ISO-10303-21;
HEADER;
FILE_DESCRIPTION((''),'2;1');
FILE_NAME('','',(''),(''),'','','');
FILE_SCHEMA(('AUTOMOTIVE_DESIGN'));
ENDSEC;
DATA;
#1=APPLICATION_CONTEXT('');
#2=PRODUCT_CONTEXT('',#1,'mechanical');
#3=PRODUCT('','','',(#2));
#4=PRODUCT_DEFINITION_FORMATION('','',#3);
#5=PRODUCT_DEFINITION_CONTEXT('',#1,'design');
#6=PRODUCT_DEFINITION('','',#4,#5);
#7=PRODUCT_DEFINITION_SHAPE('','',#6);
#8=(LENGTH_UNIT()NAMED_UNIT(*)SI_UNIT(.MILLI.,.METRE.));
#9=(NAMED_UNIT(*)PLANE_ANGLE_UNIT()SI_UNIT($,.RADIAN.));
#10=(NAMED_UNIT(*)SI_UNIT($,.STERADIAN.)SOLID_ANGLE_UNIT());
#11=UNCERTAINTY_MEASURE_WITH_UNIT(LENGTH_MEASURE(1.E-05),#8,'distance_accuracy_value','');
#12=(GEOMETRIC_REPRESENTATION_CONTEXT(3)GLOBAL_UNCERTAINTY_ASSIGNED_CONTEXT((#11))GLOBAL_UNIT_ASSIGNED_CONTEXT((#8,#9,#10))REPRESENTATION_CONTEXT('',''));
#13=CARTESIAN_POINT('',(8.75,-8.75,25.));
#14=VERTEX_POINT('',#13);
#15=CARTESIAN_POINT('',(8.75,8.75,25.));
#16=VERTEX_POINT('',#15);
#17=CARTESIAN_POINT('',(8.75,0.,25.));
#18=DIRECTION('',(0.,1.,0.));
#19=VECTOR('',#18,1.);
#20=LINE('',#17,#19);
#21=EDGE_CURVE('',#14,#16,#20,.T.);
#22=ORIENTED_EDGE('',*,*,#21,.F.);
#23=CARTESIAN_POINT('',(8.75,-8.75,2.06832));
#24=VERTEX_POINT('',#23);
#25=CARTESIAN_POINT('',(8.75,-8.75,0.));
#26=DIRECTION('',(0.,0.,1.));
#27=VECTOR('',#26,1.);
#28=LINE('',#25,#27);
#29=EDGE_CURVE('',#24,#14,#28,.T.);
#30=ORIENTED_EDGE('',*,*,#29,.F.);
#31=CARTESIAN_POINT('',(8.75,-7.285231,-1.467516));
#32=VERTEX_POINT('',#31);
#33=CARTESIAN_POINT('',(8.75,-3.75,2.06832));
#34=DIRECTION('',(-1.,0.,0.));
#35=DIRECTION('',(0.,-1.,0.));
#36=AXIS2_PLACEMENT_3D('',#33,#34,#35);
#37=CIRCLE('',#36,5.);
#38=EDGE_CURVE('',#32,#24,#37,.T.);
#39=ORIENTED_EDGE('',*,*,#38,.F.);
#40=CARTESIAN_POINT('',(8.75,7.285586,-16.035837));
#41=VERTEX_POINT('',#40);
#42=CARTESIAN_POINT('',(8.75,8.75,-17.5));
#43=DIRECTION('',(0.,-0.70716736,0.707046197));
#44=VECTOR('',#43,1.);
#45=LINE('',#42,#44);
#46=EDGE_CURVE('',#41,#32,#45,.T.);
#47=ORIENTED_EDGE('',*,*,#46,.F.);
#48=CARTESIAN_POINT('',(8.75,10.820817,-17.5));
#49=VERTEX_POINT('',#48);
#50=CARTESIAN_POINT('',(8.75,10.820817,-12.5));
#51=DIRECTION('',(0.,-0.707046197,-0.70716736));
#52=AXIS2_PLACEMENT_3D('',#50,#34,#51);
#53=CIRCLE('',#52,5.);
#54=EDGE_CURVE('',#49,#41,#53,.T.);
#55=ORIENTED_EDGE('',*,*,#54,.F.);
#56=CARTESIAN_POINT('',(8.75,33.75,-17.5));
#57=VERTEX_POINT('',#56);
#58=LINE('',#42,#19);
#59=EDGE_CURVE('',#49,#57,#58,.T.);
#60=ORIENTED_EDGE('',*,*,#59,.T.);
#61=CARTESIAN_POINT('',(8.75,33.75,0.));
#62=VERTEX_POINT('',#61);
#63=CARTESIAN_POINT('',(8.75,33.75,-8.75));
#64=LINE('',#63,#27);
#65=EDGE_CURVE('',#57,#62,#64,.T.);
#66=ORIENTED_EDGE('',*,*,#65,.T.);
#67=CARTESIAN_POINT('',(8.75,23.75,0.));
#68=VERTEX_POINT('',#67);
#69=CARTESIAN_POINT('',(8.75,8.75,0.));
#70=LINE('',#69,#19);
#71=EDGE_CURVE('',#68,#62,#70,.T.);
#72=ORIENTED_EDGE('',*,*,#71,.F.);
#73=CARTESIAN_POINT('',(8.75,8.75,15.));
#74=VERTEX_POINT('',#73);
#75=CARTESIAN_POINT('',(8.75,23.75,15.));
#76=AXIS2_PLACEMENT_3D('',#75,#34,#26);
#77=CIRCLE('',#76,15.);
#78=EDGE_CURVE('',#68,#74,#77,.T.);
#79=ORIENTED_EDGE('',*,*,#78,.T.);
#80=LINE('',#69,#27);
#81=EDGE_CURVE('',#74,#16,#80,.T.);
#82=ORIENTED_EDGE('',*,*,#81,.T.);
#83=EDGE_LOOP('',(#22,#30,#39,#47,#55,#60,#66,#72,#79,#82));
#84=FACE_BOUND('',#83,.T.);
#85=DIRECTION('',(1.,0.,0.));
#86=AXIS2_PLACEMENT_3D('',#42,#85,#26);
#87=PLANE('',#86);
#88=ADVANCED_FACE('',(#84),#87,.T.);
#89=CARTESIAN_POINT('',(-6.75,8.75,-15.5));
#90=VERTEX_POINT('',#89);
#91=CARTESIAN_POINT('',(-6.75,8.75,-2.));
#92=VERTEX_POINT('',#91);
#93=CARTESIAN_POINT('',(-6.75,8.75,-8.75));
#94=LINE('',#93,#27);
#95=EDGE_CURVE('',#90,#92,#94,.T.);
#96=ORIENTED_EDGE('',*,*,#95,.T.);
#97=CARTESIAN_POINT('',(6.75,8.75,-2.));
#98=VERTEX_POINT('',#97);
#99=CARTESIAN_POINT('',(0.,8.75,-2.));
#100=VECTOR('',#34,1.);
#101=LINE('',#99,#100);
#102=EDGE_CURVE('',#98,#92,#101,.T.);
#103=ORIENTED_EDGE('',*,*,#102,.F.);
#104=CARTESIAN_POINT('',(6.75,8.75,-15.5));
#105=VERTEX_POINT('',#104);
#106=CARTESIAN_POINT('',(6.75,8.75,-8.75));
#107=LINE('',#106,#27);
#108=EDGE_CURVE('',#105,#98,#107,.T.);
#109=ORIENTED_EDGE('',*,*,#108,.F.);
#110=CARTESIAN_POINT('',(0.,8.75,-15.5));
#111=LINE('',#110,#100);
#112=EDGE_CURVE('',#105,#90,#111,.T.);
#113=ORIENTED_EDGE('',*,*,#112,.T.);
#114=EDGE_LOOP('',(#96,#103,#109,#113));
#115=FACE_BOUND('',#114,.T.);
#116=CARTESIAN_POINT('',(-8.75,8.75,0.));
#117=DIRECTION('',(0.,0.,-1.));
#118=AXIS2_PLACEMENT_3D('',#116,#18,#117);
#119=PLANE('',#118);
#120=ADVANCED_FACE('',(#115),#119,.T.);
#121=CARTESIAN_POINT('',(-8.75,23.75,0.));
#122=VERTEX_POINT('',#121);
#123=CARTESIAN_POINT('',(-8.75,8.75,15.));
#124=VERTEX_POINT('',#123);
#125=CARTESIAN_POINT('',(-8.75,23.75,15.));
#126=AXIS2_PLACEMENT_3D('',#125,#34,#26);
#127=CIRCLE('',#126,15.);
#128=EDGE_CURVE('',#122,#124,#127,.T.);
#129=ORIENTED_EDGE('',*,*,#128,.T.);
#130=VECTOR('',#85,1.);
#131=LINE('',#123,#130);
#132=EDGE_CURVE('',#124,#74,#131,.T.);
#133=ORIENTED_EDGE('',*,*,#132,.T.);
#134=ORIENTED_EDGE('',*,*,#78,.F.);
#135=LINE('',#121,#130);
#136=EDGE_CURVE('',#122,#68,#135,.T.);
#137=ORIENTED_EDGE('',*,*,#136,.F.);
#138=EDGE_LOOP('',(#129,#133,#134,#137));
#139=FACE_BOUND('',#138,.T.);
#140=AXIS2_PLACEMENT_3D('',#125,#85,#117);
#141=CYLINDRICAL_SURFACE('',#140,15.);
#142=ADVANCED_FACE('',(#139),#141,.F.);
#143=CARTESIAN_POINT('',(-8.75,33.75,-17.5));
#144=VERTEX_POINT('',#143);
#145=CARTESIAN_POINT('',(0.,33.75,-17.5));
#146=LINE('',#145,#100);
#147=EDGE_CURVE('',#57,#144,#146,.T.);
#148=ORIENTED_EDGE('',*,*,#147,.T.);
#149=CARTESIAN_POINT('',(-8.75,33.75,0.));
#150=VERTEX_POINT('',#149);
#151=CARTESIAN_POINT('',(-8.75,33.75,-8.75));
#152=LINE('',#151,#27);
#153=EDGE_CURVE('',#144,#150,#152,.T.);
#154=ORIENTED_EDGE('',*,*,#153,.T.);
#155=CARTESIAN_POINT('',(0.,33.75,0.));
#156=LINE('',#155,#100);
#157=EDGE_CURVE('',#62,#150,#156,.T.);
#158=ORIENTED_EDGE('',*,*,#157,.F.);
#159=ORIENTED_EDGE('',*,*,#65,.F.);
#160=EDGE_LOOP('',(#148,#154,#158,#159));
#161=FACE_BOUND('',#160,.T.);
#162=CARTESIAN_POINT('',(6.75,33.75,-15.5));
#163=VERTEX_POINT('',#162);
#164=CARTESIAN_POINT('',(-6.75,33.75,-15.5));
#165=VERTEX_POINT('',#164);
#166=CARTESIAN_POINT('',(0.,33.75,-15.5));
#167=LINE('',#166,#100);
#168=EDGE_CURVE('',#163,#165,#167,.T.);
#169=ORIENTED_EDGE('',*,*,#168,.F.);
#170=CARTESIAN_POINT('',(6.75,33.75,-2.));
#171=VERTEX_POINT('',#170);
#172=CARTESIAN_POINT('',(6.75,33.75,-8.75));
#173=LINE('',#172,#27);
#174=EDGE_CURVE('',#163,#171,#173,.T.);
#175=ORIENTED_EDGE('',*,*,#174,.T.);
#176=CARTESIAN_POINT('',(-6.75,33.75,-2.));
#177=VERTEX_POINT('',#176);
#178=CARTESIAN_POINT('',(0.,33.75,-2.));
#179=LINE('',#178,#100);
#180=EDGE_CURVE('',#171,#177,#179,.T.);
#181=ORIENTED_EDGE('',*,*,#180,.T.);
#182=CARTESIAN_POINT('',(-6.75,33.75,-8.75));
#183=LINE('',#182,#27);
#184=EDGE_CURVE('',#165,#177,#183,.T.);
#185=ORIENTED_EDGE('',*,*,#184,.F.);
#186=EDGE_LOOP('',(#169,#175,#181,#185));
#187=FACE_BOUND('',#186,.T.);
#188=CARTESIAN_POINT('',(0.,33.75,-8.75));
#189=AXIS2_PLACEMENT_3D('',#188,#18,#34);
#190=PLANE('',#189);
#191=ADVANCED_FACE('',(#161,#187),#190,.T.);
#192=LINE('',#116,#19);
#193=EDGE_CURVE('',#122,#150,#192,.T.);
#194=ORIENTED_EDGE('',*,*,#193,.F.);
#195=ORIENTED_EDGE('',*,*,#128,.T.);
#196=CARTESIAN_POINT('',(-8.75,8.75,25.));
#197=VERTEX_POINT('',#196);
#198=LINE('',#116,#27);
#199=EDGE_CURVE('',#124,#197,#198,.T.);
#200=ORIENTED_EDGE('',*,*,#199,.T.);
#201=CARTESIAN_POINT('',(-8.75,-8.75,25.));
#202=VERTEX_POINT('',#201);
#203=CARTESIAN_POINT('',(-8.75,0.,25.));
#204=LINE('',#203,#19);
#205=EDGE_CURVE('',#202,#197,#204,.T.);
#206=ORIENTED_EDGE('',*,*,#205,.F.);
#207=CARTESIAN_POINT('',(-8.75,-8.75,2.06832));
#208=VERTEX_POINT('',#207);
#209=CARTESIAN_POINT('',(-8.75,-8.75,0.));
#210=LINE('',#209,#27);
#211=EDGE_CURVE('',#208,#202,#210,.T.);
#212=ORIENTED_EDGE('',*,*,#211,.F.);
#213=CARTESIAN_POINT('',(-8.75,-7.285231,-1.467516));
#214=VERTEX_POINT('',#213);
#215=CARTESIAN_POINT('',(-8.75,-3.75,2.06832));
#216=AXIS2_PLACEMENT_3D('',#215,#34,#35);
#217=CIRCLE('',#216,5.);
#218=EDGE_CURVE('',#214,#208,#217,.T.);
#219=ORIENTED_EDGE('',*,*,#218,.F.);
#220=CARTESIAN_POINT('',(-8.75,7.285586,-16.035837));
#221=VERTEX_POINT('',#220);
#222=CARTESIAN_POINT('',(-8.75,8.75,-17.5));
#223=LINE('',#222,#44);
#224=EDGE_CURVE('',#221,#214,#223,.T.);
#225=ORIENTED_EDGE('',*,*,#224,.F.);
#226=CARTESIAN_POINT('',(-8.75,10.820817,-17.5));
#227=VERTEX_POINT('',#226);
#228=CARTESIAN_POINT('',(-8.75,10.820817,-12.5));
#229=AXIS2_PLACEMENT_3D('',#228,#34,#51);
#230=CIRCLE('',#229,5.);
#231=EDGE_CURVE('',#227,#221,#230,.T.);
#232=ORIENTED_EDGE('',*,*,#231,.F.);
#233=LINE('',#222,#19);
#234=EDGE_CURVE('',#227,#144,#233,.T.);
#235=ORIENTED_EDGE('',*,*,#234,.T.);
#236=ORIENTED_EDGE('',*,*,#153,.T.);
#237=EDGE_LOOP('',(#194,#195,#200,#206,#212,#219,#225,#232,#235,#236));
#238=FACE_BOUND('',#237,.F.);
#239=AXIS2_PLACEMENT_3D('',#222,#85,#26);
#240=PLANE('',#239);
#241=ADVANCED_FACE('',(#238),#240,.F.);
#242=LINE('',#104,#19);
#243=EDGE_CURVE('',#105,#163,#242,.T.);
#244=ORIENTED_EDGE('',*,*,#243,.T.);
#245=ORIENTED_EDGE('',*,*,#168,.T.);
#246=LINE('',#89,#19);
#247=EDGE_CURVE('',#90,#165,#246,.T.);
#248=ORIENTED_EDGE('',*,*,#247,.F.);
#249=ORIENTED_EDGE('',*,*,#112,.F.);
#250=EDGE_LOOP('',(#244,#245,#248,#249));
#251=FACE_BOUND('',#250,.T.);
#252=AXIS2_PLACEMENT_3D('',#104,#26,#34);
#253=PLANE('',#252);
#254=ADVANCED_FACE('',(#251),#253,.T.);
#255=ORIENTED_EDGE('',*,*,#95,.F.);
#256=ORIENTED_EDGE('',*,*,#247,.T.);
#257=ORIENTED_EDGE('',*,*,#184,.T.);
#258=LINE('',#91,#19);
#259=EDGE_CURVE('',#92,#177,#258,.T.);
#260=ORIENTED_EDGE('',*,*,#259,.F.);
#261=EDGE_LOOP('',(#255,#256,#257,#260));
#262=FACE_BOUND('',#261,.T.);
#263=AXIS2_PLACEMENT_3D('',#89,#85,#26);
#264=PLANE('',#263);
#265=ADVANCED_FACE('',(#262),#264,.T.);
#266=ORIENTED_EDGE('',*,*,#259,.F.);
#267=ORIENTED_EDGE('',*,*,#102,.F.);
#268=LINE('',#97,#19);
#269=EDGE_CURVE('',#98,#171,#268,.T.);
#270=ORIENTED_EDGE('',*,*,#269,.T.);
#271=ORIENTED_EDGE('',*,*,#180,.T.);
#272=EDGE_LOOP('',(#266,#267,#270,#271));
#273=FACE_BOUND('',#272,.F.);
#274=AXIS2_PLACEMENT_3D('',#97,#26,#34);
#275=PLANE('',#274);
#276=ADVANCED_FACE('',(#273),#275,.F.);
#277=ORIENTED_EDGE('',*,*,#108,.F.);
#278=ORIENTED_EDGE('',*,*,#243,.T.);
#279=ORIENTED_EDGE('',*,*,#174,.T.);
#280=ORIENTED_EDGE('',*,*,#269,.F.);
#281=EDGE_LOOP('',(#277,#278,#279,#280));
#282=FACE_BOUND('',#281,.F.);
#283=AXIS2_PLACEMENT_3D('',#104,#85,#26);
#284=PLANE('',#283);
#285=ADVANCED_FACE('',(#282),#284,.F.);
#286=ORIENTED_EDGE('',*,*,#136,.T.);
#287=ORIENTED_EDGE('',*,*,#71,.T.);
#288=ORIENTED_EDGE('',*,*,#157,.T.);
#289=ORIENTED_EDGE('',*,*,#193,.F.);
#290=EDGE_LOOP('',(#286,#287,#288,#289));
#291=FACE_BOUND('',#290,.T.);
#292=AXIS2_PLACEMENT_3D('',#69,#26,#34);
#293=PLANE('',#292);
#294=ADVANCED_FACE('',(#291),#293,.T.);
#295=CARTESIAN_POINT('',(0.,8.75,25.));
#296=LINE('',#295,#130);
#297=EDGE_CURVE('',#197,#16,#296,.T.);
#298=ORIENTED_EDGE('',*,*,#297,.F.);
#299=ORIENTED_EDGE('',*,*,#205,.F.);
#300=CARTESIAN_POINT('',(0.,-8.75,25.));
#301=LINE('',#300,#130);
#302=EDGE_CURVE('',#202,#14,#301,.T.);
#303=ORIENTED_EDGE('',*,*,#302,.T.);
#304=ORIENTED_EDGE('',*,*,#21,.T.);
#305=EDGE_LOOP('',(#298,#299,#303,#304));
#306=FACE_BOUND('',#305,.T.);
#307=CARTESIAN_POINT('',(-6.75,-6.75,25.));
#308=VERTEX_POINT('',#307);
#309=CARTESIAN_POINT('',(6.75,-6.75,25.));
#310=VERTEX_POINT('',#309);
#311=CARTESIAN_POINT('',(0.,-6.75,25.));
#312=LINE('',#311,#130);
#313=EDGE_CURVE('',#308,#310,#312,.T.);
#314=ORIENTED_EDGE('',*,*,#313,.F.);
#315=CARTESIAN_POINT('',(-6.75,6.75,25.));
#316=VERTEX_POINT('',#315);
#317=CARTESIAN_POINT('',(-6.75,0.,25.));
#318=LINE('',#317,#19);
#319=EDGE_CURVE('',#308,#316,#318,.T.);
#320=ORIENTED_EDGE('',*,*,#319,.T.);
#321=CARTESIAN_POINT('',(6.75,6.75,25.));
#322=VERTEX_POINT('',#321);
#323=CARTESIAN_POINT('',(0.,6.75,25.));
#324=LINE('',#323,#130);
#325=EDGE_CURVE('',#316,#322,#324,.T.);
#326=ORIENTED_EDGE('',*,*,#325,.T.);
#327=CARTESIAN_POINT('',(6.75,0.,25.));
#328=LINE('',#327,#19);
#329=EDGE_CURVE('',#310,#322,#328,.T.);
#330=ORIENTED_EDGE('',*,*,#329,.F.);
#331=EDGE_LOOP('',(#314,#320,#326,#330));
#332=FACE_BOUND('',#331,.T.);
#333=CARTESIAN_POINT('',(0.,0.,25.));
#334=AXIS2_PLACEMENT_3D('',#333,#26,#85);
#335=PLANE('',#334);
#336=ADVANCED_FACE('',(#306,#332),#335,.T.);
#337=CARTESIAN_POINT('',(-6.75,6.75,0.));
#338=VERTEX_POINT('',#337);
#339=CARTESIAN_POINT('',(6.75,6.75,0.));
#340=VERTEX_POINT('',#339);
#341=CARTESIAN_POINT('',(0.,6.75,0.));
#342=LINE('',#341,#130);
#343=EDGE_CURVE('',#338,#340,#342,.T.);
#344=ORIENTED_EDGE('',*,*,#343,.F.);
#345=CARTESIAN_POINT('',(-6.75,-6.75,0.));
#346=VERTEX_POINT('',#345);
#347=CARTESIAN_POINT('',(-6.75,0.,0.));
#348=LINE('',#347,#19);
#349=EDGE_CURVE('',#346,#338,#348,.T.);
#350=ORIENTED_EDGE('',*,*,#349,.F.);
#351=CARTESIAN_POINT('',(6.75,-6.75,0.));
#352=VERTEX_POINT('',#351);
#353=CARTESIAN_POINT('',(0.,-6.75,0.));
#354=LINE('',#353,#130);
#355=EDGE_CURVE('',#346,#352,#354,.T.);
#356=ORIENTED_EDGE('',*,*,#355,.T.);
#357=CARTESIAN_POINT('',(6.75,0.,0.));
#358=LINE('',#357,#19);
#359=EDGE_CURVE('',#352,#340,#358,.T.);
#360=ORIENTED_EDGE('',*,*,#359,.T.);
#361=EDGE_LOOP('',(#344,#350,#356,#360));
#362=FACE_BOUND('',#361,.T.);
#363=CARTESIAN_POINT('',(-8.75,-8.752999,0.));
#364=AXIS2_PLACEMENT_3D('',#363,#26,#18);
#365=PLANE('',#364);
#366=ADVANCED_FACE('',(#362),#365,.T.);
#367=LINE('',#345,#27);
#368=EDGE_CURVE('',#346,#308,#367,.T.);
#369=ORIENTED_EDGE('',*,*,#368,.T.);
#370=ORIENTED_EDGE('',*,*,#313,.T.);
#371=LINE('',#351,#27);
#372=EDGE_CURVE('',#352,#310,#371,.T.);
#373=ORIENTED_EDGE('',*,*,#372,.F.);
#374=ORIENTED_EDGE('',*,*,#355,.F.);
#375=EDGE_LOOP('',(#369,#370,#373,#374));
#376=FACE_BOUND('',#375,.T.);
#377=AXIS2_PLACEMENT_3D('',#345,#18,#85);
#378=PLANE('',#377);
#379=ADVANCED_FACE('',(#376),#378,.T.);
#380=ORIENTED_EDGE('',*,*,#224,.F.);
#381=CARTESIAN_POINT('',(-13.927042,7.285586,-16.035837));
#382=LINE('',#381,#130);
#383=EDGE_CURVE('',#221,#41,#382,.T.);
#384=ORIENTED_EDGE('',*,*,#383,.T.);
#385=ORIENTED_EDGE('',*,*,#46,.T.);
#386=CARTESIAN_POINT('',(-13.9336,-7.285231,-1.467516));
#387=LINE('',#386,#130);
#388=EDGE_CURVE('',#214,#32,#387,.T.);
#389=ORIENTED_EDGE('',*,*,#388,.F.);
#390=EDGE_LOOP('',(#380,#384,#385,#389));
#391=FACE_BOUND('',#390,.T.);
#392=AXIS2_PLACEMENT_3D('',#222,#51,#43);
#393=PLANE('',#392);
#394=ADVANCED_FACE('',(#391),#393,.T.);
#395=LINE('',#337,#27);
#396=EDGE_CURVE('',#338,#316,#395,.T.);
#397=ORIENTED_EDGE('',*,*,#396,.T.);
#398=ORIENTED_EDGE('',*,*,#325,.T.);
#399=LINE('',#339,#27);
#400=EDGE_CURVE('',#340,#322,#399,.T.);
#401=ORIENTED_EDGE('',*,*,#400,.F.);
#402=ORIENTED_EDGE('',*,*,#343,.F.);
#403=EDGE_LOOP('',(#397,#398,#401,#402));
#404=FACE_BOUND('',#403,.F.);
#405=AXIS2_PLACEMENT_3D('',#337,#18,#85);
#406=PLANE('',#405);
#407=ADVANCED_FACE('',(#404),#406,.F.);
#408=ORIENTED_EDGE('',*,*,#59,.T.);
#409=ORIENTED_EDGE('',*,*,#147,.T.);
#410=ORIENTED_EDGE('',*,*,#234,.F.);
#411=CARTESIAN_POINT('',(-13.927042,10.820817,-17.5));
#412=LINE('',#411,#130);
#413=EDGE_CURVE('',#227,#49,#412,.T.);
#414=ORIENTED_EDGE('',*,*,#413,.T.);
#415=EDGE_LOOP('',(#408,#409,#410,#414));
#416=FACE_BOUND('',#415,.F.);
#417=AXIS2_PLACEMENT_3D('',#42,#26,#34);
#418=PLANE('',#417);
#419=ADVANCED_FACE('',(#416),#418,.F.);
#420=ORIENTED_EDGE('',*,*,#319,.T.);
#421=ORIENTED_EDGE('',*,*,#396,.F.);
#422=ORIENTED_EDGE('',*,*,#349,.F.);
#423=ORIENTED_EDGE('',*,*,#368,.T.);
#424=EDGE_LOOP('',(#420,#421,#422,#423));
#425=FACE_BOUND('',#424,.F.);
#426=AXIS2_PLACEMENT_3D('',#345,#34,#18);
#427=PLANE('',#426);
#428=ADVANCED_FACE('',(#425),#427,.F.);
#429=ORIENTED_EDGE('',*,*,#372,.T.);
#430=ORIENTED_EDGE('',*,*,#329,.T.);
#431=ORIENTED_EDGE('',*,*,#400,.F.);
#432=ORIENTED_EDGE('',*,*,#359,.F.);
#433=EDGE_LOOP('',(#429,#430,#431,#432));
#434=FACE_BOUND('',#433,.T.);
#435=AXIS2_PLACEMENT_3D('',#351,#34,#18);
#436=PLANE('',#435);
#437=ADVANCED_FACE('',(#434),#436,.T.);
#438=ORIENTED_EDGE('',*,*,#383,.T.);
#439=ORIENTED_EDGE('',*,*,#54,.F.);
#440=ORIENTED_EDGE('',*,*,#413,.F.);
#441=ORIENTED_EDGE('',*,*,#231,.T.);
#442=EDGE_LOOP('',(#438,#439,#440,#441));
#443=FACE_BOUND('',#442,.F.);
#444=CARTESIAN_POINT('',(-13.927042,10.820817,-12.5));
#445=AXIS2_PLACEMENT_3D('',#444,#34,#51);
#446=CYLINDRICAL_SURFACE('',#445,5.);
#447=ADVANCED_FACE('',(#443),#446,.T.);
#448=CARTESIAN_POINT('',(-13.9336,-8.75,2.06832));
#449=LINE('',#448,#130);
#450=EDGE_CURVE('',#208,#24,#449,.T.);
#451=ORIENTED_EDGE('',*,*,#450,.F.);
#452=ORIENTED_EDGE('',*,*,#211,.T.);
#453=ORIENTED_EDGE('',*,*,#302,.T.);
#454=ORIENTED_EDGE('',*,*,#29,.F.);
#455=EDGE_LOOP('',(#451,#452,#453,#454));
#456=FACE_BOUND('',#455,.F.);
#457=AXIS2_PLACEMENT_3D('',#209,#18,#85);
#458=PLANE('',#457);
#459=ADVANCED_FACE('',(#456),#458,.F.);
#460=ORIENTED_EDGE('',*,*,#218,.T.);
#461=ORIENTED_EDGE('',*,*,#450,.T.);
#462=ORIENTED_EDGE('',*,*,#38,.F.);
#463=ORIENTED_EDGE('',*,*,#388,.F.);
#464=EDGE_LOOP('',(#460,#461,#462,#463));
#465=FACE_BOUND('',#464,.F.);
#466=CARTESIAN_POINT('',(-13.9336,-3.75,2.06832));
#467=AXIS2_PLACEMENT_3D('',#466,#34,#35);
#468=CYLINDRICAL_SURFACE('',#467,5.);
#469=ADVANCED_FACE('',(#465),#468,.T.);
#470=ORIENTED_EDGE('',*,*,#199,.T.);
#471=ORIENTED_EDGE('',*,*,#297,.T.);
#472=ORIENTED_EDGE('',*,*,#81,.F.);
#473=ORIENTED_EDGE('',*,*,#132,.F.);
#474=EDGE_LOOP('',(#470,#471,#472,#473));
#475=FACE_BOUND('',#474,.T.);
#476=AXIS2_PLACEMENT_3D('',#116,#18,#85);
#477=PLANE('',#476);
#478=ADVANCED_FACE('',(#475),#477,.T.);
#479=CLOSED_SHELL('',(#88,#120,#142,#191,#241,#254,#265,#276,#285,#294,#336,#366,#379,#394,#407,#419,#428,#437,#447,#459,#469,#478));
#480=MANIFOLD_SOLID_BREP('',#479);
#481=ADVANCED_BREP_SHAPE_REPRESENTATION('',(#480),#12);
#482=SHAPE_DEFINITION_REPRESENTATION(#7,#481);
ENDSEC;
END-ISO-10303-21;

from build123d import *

# Parameters (mm, degrees)
F1_W        = 17.5
F1_H        = 17.5
F1_W_2      = 13.5
F1_H_2      = 13.5
F2_DEPTH    = 25
F3_W        = 17.5
F3_H        = 17.5
F3_W_2      = 13.5
F3_H_2      = 13.5
F4_DEPTH    = 25
F6_DEPTH    = 17.5
F7_T1_DEPTH = 18.2385988642
F7_T3_DEPTH = 27.8540843944
F7_T5_DEPTH = 27.867199163
F8_R        = 15


# Not quite as in the source:
# - a fillet or chamfer that OpenCascade refuses, or shapes differently, is made with other operations: its cross-section is extruded or revolved along the edge and cut away or added


with BuildPart() as f2:
    # F1 (on Top) → F2 (new body)
    with BuildSketch(Plane.XY):
        Rectangle(F1_W, F1_H)
        Rectangle(F1_W_2, F1_H_2, mode=Mode.SUBTRACT)
    extrude(amount=F2_DEPTH)

    # F3 (on face) → F4 (join)
    with BuildSketch(Plane(origin=(0, 8.75, 0), x_dir=(-1, 0, 0), z_dir=(0, 1, 0))):
        with Locations((0, -8.75)):
            Rectangle(F3_W, F3_H)
        with Locations((0, -8.75)):
            Rectangle(F3_W_2, F3_H_2, mode=Mode.SUBTRACT)
    extrude(amount=F4_DEPTH)

    # F5 (on face) → F6 (join, through all)
    with BuildSketch(Plane(origin=(-8.75, 0, 0), x_dir=(0, -1, 0), z_dir=(-1, 0, 0))):
        Polygon((-8.75, 0), (-8.75, -17.5), (8.7529988959, 0), align=None)
    extrude(amount=-F6_DEPTH)

    # F7: fillet of radius 5 on 3 edges, made by hand

    # F7_s2 → F7_t1 (cut)
    with BuildSketch(Plane.YZ.offset(-9.1192994321)):
        with BuildLine():
            ThreePointArc((-8.75, 0), (-8.6996483838, -0.052591736), (-8.6485362941, -0.1044447036))
            Line((-8.6485362941, -0.1044447036), (-8.7529988959, 0))
            Line((-8.7529988959, 0), (-8.75, 0))
        make_face()
    extrude(amount=F7_T1_DEPTH, mode=Mode.SUBTRACT)

    # F7_s4 → F7_t3 (cut)
    with BuildSketch(Plane.YZ.offset(-13.9270421972)):
        with BuildLine():
            ThreePointArc((7.2855858942, -16.0358368012), (8.9075976032, -17.1194796247), (10.8208168789, -17.5))
            Line((10.8208168789, -17.5), (8.75, -17.5))
            Line((8.75, -17.5), (7.2855858942, -16.0358368012))
        make_face()
    extrude(amount=F7_T3_DEPTH, mode=Mode.SUBTRACT)

    # F7_s6 → F7_t5 (cut)
    with BuildSketch(Plane.YZ.offset(-13.9335995815)):
        with BuildLine():
            ThreePointArc((-8.75, 2.0683203716), (-8.3693156919, 0.1547053272), (-7.2852309847, -1.4675164296))
            Line((-7.2852309847, -1.4675164296), (-7.6387540831, -1.8211001097))
            ThreePointArc((-7.6387540831, -1.8211001097), (-9.0020593926, -0.4580283837), (-9.1136694691, -0.3431392098))
            Line((-9.1136694691, -0.3431392098), (-9.25, 0))
            Line((-9.25, 0), (-9.25, 2.0683203716))
            Line((-9.25, 2.0683203716), (-8.75, 2.0683203716))
        make_face()
    extrude(amount=F7_T5_DEPTH, mode=Mode.SUBTRACT)

    # F8
    f8_edges = [f2.edges().sort_by_distance(p)[0] for p in [
        (0, 8.75, 0),
    ]]
    fillet(f8_edges, radius=F8_R)


solid = f2.part
